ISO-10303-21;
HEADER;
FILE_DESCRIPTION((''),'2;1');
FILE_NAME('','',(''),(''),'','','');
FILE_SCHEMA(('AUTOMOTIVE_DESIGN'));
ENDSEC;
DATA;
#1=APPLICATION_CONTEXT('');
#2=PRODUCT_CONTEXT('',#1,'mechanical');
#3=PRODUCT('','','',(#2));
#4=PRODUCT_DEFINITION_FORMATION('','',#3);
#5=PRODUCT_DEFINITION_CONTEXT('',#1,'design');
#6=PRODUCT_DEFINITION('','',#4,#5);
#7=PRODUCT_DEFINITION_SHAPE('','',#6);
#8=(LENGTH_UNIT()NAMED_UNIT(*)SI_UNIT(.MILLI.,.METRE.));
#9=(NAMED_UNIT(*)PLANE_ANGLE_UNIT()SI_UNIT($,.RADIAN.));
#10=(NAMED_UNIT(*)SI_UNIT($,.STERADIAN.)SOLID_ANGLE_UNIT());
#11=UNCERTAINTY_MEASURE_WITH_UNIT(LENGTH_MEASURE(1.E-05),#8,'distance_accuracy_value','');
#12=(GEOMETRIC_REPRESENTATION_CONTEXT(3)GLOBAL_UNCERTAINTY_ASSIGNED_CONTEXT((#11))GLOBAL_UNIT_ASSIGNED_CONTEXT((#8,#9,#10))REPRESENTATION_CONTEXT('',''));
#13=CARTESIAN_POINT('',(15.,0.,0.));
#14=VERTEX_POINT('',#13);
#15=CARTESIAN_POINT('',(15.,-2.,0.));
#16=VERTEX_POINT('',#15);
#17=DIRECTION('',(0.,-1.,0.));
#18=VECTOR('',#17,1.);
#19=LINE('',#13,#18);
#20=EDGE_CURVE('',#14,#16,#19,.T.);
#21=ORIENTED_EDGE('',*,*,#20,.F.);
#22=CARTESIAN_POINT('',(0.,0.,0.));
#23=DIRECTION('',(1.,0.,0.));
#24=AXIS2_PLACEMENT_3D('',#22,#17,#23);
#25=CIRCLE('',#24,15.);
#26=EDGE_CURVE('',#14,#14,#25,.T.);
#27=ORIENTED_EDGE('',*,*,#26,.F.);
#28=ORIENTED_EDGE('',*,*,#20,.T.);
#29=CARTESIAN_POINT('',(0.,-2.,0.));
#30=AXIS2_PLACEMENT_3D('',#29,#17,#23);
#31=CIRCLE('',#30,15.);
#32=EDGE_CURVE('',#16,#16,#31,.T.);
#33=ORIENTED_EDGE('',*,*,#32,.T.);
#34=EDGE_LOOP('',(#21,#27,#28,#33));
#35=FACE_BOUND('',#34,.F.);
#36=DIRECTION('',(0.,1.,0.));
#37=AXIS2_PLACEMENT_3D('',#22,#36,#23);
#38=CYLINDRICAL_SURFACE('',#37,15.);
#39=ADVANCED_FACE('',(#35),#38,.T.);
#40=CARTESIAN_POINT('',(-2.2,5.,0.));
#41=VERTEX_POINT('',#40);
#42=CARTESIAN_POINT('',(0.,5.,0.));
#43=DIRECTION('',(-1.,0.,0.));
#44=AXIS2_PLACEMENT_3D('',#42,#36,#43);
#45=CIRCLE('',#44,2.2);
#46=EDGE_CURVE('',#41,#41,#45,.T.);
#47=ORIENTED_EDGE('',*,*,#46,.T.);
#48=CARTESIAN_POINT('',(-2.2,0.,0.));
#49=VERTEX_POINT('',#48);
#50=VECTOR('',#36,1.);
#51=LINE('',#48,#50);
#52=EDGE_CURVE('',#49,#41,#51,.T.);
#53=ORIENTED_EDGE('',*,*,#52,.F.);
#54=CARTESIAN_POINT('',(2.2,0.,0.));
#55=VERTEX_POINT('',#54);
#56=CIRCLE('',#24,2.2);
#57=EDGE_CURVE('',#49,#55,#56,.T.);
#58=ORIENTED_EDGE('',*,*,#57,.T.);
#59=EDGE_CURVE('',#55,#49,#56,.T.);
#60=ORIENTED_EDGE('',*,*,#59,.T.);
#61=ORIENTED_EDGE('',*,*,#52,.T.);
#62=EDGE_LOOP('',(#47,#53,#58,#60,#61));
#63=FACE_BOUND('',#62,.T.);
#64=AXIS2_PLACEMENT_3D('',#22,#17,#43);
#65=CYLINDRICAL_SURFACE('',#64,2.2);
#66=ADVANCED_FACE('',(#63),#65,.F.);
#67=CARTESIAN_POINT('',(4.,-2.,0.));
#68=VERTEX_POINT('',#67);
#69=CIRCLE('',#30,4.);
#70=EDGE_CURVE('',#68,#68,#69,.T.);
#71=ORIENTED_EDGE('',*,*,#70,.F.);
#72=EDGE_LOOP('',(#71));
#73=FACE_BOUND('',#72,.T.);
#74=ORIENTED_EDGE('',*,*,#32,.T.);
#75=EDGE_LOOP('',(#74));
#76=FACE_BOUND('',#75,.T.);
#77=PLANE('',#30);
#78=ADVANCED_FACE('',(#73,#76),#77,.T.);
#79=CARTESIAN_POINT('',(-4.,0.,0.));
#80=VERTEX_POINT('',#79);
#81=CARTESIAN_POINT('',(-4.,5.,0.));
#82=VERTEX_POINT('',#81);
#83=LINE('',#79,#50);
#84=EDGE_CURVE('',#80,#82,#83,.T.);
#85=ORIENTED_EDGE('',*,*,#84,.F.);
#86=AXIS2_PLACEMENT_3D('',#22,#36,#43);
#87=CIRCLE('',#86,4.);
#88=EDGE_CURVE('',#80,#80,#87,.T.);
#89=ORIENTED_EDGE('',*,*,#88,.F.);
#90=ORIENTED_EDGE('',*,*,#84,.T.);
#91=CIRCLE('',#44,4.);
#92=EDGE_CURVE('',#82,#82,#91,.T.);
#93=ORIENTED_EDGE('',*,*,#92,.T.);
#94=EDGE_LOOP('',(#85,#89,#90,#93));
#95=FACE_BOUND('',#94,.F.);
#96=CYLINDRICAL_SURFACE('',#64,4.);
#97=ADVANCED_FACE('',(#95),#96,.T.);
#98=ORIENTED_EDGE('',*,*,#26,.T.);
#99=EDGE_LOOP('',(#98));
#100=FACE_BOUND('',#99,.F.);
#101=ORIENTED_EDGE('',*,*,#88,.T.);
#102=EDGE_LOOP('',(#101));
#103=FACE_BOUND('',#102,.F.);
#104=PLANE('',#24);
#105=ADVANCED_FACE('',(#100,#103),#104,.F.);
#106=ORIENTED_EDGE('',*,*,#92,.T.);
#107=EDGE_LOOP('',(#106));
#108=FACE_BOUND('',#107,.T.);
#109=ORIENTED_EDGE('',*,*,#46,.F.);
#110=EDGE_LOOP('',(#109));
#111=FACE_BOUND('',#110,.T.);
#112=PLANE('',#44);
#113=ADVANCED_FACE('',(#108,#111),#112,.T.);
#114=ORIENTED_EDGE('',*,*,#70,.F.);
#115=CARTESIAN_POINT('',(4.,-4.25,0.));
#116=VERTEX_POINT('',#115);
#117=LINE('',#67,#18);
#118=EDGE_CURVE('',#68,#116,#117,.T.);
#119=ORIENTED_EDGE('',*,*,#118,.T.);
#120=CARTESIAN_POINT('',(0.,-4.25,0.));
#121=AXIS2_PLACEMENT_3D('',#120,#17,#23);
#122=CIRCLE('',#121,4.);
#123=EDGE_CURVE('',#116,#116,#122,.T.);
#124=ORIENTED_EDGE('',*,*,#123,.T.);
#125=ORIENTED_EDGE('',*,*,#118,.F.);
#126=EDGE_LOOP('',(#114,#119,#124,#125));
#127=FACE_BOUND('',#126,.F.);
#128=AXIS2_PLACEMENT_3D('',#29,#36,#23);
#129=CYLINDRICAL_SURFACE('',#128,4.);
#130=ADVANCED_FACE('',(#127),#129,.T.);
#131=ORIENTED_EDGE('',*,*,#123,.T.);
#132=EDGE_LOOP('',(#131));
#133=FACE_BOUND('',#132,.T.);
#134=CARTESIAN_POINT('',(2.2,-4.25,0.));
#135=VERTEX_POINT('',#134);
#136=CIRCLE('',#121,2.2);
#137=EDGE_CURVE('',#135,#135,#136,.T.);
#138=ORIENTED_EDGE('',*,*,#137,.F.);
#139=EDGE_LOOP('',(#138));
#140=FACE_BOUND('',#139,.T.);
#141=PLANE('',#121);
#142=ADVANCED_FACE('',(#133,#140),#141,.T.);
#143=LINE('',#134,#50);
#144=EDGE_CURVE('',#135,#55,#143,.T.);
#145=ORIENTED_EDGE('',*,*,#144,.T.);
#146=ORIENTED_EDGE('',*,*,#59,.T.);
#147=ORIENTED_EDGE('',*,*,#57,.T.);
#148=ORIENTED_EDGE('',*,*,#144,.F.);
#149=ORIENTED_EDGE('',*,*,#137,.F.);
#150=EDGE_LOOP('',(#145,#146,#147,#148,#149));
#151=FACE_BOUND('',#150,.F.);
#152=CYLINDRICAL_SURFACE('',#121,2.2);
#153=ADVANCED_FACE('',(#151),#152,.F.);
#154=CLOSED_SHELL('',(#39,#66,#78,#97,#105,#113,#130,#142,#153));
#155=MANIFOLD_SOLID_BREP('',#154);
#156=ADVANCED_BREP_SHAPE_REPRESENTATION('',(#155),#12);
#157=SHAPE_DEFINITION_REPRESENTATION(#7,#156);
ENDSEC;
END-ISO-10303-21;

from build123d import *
from build123d import SkipClean  # not in build123d's __all__

# Parameters (mm, degrees)
F0_R     = 15
F1_DEPTH = 2
F2_R     = 4
F3_DEPTH = 2.25
F4_R     = 2.2
F5_DEPTH = 4.251
F6_R     = 4
F6_R_2   = 2.2
F7_DEPTH = 5


with BuildPart() as f1:
    # F0 (on Front) → F1 (new body)
    with BuildSketch(Plane.XZ):
        Circle(F0_R)
    extrude(amount=F1_DEPTH)

    # F2 (on face) → F3 (join)
    with BuildSketch(Plane.XZ.offset(2)):
        Circle(F2_R)
    extrude(amount=F3_DEPTH)

    # F4 (on face) → F5 (cut, through all)
    with BuildSketch(Plane.XZ.offset(4.25)):
        Circle(F4_R)
    extrude(amount=-F5_DEPTH, mode=Mode.SUBTRACT)

    # F6 (on face) → F7 (join)
    with BuildSketch(Plane(origin=(0, 0, 0), x_dir=(-1, 0, 0), z_dir=(0, 1, 0))):
        Circle(F6_R)
        Circle(F6_R_2, mode=Mode.SUBTRACT)
    with SkipClean():  # cleaning this boolean's faces spoils the solid; the shape is the same uncleaned
        extrude(amount=F7_DEPTH)


solid = f1.part
